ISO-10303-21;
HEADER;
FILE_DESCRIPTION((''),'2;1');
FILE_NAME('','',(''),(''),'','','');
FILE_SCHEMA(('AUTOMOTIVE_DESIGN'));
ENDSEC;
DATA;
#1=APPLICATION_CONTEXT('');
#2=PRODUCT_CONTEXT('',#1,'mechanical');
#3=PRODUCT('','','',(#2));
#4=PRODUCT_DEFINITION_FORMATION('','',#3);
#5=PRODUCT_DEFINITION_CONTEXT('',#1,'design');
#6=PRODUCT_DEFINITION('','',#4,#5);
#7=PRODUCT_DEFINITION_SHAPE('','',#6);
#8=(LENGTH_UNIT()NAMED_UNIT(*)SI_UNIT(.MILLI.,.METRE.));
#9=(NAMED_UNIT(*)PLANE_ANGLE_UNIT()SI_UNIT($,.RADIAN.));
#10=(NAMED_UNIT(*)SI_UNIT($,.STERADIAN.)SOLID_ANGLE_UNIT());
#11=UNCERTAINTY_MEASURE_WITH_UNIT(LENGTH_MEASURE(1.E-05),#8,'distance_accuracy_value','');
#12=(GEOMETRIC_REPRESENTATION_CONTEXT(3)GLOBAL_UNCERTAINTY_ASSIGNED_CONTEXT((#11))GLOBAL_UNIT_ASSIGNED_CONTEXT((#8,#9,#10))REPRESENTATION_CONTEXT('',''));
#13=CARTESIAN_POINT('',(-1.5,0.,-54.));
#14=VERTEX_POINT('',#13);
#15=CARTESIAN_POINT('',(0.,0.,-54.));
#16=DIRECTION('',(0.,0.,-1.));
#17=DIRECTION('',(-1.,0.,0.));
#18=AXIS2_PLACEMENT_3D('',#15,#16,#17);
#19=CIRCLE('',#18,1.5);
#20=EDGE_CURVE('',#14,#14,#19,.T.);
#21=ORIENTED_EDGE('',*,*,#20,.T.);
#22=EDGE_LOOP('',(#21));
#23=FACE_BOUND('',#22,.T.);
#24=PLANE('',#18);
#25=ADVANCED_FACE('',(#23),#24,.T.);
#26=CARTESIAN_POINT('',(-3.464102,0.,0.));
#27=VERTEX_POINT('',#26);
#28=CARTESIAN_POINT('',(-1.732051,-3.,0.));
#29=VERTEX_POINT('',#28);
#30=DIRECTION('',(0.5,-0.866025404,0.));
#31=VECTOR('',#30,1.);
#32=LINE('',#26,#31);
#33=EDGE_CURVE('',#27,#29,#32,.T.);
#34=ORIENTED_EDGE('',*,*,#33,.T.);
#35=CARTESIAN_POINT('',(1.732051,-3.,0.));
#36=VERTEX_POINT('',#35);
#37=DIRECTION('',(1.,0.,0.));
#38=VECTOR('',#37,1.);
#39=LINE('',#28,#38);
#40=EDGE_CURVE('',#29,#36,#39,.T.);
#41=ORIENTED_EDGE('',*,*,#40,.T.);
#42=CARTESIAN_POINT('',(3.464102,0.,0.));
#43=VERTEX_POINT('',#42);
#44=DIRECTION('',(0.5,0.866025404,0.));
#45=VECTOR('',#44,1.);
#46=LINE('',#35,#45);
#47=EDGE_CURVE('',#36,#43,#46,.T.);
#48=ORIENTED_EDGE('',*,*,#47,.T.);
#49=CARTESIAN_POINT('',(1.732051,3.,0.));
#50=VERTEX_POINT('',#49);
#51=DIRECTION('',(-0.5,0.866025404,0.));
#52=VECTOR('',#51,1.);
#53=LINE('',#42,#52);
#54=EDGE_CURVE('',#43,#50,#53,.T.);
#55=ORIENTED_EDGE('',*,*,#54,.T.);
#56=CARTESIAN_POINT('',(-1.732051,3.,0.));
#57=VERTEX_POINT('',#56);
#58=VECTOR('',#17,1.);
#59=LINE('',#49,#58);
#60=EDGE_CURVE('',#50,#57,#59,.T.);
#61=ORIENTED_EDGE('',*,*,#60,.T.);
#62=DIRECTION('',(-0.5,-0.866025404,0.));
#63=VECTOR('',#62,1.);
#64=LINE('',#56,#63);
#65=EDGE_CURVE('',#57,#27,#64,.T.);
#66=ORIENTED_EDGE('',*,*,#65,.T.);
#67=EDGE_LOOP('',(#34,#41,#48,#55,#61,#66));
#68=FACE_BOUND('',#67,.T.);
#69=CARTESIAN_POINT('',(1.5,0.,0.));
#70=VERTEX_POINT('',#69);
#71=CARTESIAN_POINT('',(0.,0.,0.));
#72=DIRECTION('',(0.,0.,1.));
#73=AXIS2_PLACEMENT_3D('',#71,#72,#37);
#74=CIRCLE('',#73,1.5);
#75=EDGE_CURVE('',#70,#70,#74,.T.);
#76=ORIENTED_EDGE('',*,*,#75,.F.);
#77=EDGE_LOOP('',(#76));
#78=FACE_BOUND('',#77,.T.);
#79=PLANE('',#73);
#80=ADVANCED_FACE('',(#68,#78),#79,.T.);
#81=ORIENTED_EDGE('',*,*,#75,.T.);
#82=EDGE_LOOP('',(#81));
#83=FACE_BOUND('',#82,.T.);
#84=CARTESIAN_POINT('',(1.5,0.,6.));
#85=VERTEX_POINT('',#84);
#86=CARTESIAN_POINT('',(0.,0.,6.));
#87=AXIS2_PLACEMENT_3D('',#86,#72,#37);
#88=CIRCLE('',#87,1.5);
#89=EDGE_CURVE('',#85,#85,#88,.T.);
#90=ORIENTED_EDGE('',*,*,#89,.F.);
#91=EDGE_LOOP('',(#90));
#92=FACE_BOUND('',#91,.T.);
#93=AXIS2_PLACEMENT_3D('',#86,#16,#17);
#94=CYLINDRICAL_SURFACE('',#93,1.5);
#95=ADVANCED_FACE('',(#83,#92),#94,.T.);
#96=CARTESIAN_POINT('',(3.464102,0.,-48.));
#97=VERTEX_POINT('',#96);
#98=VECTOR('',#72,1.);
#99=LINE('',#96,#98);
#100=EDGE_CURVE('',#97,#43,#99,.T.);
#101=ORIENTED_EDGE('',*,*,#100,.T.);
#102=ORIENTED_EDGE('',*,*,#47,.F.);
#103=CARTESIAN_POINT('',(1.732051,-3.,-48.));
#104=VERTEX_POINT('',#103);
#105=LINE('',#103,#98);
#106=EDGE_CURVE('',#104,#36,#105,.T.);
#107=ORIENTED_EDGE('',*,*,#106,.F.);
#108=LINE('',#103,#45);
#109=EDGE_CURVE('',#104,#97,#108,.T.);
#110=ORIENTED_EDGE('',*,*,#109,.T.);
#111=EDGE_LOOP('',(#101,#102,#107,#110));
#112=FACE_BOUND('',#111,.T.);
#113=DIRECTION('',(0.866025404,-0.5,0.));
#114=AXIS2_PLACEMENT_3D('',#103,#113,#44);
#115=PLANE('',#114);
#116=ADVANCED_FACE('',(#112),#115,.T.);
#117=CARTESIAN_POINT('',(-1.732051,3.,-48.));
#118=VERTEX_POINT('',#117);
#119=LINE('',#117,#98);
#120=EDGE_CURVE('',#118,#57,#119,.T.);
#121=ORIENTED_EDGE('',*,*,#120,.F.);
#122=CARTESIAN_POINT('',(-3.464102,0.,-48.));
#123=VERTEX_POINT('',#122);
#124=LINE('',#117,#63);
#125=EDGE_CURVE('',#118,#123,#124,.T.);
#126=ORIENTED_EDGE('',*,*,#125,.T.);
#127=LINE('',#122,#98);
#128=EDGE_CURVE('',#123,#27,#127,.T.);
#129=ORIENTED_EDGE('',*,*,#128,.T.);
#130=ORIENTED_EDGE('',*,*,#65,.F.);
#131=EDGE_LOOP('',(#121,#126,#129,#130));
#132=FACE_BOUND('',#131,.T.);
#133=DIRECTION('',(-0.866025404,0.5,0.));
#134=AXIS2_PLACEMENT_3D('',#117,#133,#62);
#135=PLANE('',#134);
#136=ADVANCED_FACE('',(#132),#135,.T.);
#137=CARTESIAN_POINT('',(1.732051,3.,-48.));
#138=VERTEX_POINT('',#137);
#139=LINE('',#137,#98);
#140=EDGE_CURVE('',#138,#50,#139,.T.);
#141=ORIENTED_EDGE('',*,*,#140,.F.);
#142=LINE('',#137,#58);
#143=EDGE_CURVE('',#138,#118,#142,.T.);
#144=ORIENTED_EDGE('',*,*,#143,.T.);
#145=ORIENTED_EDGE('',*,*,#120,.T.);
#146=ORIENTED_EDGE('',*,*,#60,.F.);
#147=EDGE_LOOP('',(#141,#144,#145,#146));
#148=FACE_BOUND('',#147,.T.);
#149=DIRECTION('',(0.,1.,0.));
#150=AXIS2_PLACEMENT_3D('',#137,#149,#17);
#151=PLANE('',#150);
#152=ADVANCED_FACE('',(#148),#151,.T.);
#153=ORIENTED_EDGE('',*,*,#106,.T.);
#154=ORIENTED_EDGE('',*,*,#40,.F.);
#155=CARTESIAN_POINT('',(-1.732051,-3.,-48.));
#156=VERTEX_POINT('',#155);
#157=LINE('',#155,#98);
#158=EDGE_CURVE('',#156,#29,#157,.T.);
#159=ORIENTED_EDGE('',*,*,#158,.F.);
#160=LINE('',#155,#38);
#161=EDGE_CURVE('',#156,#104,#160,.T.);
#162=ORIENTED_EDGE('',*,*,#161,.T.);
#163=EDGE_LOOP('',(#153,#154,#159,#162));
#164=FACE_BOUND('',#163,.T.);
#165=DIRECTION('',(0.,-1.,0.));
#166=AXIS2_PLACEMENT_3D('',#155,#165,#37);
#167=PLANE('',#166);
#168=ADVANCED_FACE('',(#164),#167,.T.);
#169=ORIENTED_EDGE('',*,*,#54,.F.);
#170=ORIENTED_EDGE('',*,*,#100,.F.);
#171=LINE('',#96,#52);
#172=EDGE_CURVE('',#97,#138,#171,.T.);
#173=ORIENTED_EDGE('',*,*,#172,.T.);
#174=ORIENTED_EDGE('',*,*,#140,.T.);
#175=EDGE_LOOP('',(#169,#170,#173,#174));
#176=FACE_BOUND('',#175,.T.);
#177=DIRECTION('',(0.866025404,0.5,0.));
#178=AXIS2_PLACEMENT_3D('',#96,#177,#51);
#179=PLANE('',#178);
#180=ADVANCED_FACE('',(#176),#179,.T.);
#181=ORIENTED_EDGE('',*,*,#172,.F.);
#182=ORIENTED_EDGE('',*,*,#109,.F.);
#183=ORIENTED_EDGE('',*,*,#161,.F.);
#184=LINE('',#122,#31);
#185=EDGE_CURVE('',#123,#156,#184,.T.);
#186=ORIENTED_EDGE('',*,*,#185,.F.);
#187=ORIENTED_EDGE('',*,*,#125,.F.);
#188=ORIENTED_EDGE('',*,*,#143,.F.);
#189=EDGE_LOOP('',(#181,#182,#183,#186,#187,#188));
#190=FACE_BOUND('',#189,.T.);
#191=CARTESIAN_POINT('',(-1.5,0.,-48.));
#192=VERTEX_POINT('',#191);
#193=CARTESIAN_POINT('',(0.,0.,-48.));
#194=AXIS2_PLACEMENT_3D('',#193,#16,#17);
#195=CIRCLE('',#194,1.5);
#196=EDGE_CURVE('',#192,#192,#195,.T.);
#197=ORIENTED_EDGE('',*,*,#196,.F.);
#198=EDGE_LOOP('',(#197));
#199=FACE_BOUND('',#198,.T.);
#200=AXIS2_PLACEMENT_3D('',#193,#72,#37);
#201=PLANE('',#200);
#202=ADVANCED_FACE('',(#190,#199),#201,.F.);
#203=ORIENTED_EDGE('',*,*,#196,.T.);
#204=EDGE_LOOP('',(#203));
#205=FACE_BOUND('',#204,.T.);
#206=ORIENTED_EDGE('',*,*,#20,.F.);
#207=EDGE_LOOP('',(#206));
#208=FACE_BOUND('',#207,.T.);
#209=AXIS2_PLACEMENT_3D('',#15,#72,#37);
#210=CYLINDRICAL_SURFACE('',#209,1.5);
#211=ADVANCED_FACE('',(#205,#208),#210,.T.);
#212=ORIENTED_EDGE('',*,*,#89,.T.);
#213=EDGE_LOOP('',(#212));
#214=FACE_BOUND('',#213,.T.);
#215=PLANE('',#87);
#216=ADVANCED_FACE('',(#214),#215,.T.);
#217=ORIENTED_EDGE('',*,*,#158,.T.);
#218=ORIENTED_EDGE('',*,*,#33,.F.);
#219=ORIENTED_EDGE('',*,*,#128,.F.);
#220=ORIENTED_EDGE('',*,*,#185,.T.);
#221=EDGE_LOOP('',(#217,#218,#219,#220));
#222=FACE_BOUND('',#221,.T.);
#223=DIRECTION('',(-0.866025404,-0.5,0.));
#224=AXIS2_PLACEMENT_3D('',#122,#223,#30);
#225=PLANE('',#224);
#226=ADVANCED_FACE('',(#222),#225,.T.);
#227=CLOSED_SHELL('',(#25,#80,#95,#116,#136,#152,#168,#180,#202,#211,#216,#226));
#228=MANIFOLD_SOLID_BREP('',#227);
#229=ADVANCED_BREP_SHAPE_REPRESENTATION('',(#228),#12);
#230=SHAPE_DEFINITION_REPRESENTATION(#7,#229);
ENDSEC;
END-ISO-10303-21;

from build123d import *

# Parameters (mm, degrees)
SM_BASE_FLANGE_1_DEPTH = 48
SKETCH_6_R             = 1.5
EXTRUDE_1_DEPTH        = 6
EXTRUDE_START          = 6
SKETCH_7_R             = 1.5
EXTRUDE_2_DEPTH        = 6


# Sheet-metal steps are written as plain solids
with BuildPart() as part:
    # Sketch 1 → 基体-法兰1 (new body)
    with BuildSketch(Plane.XY):
        Polygon((3.464101615, 0), (1.732050808, 3), (-1.732050808, 3), (-3.464101615, 0), (-1.732050808, -3), (1.732050808, -3), align=None)
    extrude(amount=-SM_BASE_FLANGE_1_DEPTH)

    # 草图6 → 凸台-拉伸1 (add)
    with BuildSketch(Plane.XY):
        Circle(SKETCH_6_R)
    extrude(amount=EXTRUDE_1_DEPTH)

    # 草图7 → 凸台-拉伸2 (add)
    with BuildSketch(Plane(origin=(0, 0, -48), x_dir=(-1, 0, 0), z_dir=(0, 0, -1)).offset(EXTRUDE_START)):
        with Locations(Location((0, 0, 0), (0, 0, 180))):
            Circle(SKETCH_7_R)
    extrude(amount=-EXTRUDE_2_DEPTH)


solid = part.part
